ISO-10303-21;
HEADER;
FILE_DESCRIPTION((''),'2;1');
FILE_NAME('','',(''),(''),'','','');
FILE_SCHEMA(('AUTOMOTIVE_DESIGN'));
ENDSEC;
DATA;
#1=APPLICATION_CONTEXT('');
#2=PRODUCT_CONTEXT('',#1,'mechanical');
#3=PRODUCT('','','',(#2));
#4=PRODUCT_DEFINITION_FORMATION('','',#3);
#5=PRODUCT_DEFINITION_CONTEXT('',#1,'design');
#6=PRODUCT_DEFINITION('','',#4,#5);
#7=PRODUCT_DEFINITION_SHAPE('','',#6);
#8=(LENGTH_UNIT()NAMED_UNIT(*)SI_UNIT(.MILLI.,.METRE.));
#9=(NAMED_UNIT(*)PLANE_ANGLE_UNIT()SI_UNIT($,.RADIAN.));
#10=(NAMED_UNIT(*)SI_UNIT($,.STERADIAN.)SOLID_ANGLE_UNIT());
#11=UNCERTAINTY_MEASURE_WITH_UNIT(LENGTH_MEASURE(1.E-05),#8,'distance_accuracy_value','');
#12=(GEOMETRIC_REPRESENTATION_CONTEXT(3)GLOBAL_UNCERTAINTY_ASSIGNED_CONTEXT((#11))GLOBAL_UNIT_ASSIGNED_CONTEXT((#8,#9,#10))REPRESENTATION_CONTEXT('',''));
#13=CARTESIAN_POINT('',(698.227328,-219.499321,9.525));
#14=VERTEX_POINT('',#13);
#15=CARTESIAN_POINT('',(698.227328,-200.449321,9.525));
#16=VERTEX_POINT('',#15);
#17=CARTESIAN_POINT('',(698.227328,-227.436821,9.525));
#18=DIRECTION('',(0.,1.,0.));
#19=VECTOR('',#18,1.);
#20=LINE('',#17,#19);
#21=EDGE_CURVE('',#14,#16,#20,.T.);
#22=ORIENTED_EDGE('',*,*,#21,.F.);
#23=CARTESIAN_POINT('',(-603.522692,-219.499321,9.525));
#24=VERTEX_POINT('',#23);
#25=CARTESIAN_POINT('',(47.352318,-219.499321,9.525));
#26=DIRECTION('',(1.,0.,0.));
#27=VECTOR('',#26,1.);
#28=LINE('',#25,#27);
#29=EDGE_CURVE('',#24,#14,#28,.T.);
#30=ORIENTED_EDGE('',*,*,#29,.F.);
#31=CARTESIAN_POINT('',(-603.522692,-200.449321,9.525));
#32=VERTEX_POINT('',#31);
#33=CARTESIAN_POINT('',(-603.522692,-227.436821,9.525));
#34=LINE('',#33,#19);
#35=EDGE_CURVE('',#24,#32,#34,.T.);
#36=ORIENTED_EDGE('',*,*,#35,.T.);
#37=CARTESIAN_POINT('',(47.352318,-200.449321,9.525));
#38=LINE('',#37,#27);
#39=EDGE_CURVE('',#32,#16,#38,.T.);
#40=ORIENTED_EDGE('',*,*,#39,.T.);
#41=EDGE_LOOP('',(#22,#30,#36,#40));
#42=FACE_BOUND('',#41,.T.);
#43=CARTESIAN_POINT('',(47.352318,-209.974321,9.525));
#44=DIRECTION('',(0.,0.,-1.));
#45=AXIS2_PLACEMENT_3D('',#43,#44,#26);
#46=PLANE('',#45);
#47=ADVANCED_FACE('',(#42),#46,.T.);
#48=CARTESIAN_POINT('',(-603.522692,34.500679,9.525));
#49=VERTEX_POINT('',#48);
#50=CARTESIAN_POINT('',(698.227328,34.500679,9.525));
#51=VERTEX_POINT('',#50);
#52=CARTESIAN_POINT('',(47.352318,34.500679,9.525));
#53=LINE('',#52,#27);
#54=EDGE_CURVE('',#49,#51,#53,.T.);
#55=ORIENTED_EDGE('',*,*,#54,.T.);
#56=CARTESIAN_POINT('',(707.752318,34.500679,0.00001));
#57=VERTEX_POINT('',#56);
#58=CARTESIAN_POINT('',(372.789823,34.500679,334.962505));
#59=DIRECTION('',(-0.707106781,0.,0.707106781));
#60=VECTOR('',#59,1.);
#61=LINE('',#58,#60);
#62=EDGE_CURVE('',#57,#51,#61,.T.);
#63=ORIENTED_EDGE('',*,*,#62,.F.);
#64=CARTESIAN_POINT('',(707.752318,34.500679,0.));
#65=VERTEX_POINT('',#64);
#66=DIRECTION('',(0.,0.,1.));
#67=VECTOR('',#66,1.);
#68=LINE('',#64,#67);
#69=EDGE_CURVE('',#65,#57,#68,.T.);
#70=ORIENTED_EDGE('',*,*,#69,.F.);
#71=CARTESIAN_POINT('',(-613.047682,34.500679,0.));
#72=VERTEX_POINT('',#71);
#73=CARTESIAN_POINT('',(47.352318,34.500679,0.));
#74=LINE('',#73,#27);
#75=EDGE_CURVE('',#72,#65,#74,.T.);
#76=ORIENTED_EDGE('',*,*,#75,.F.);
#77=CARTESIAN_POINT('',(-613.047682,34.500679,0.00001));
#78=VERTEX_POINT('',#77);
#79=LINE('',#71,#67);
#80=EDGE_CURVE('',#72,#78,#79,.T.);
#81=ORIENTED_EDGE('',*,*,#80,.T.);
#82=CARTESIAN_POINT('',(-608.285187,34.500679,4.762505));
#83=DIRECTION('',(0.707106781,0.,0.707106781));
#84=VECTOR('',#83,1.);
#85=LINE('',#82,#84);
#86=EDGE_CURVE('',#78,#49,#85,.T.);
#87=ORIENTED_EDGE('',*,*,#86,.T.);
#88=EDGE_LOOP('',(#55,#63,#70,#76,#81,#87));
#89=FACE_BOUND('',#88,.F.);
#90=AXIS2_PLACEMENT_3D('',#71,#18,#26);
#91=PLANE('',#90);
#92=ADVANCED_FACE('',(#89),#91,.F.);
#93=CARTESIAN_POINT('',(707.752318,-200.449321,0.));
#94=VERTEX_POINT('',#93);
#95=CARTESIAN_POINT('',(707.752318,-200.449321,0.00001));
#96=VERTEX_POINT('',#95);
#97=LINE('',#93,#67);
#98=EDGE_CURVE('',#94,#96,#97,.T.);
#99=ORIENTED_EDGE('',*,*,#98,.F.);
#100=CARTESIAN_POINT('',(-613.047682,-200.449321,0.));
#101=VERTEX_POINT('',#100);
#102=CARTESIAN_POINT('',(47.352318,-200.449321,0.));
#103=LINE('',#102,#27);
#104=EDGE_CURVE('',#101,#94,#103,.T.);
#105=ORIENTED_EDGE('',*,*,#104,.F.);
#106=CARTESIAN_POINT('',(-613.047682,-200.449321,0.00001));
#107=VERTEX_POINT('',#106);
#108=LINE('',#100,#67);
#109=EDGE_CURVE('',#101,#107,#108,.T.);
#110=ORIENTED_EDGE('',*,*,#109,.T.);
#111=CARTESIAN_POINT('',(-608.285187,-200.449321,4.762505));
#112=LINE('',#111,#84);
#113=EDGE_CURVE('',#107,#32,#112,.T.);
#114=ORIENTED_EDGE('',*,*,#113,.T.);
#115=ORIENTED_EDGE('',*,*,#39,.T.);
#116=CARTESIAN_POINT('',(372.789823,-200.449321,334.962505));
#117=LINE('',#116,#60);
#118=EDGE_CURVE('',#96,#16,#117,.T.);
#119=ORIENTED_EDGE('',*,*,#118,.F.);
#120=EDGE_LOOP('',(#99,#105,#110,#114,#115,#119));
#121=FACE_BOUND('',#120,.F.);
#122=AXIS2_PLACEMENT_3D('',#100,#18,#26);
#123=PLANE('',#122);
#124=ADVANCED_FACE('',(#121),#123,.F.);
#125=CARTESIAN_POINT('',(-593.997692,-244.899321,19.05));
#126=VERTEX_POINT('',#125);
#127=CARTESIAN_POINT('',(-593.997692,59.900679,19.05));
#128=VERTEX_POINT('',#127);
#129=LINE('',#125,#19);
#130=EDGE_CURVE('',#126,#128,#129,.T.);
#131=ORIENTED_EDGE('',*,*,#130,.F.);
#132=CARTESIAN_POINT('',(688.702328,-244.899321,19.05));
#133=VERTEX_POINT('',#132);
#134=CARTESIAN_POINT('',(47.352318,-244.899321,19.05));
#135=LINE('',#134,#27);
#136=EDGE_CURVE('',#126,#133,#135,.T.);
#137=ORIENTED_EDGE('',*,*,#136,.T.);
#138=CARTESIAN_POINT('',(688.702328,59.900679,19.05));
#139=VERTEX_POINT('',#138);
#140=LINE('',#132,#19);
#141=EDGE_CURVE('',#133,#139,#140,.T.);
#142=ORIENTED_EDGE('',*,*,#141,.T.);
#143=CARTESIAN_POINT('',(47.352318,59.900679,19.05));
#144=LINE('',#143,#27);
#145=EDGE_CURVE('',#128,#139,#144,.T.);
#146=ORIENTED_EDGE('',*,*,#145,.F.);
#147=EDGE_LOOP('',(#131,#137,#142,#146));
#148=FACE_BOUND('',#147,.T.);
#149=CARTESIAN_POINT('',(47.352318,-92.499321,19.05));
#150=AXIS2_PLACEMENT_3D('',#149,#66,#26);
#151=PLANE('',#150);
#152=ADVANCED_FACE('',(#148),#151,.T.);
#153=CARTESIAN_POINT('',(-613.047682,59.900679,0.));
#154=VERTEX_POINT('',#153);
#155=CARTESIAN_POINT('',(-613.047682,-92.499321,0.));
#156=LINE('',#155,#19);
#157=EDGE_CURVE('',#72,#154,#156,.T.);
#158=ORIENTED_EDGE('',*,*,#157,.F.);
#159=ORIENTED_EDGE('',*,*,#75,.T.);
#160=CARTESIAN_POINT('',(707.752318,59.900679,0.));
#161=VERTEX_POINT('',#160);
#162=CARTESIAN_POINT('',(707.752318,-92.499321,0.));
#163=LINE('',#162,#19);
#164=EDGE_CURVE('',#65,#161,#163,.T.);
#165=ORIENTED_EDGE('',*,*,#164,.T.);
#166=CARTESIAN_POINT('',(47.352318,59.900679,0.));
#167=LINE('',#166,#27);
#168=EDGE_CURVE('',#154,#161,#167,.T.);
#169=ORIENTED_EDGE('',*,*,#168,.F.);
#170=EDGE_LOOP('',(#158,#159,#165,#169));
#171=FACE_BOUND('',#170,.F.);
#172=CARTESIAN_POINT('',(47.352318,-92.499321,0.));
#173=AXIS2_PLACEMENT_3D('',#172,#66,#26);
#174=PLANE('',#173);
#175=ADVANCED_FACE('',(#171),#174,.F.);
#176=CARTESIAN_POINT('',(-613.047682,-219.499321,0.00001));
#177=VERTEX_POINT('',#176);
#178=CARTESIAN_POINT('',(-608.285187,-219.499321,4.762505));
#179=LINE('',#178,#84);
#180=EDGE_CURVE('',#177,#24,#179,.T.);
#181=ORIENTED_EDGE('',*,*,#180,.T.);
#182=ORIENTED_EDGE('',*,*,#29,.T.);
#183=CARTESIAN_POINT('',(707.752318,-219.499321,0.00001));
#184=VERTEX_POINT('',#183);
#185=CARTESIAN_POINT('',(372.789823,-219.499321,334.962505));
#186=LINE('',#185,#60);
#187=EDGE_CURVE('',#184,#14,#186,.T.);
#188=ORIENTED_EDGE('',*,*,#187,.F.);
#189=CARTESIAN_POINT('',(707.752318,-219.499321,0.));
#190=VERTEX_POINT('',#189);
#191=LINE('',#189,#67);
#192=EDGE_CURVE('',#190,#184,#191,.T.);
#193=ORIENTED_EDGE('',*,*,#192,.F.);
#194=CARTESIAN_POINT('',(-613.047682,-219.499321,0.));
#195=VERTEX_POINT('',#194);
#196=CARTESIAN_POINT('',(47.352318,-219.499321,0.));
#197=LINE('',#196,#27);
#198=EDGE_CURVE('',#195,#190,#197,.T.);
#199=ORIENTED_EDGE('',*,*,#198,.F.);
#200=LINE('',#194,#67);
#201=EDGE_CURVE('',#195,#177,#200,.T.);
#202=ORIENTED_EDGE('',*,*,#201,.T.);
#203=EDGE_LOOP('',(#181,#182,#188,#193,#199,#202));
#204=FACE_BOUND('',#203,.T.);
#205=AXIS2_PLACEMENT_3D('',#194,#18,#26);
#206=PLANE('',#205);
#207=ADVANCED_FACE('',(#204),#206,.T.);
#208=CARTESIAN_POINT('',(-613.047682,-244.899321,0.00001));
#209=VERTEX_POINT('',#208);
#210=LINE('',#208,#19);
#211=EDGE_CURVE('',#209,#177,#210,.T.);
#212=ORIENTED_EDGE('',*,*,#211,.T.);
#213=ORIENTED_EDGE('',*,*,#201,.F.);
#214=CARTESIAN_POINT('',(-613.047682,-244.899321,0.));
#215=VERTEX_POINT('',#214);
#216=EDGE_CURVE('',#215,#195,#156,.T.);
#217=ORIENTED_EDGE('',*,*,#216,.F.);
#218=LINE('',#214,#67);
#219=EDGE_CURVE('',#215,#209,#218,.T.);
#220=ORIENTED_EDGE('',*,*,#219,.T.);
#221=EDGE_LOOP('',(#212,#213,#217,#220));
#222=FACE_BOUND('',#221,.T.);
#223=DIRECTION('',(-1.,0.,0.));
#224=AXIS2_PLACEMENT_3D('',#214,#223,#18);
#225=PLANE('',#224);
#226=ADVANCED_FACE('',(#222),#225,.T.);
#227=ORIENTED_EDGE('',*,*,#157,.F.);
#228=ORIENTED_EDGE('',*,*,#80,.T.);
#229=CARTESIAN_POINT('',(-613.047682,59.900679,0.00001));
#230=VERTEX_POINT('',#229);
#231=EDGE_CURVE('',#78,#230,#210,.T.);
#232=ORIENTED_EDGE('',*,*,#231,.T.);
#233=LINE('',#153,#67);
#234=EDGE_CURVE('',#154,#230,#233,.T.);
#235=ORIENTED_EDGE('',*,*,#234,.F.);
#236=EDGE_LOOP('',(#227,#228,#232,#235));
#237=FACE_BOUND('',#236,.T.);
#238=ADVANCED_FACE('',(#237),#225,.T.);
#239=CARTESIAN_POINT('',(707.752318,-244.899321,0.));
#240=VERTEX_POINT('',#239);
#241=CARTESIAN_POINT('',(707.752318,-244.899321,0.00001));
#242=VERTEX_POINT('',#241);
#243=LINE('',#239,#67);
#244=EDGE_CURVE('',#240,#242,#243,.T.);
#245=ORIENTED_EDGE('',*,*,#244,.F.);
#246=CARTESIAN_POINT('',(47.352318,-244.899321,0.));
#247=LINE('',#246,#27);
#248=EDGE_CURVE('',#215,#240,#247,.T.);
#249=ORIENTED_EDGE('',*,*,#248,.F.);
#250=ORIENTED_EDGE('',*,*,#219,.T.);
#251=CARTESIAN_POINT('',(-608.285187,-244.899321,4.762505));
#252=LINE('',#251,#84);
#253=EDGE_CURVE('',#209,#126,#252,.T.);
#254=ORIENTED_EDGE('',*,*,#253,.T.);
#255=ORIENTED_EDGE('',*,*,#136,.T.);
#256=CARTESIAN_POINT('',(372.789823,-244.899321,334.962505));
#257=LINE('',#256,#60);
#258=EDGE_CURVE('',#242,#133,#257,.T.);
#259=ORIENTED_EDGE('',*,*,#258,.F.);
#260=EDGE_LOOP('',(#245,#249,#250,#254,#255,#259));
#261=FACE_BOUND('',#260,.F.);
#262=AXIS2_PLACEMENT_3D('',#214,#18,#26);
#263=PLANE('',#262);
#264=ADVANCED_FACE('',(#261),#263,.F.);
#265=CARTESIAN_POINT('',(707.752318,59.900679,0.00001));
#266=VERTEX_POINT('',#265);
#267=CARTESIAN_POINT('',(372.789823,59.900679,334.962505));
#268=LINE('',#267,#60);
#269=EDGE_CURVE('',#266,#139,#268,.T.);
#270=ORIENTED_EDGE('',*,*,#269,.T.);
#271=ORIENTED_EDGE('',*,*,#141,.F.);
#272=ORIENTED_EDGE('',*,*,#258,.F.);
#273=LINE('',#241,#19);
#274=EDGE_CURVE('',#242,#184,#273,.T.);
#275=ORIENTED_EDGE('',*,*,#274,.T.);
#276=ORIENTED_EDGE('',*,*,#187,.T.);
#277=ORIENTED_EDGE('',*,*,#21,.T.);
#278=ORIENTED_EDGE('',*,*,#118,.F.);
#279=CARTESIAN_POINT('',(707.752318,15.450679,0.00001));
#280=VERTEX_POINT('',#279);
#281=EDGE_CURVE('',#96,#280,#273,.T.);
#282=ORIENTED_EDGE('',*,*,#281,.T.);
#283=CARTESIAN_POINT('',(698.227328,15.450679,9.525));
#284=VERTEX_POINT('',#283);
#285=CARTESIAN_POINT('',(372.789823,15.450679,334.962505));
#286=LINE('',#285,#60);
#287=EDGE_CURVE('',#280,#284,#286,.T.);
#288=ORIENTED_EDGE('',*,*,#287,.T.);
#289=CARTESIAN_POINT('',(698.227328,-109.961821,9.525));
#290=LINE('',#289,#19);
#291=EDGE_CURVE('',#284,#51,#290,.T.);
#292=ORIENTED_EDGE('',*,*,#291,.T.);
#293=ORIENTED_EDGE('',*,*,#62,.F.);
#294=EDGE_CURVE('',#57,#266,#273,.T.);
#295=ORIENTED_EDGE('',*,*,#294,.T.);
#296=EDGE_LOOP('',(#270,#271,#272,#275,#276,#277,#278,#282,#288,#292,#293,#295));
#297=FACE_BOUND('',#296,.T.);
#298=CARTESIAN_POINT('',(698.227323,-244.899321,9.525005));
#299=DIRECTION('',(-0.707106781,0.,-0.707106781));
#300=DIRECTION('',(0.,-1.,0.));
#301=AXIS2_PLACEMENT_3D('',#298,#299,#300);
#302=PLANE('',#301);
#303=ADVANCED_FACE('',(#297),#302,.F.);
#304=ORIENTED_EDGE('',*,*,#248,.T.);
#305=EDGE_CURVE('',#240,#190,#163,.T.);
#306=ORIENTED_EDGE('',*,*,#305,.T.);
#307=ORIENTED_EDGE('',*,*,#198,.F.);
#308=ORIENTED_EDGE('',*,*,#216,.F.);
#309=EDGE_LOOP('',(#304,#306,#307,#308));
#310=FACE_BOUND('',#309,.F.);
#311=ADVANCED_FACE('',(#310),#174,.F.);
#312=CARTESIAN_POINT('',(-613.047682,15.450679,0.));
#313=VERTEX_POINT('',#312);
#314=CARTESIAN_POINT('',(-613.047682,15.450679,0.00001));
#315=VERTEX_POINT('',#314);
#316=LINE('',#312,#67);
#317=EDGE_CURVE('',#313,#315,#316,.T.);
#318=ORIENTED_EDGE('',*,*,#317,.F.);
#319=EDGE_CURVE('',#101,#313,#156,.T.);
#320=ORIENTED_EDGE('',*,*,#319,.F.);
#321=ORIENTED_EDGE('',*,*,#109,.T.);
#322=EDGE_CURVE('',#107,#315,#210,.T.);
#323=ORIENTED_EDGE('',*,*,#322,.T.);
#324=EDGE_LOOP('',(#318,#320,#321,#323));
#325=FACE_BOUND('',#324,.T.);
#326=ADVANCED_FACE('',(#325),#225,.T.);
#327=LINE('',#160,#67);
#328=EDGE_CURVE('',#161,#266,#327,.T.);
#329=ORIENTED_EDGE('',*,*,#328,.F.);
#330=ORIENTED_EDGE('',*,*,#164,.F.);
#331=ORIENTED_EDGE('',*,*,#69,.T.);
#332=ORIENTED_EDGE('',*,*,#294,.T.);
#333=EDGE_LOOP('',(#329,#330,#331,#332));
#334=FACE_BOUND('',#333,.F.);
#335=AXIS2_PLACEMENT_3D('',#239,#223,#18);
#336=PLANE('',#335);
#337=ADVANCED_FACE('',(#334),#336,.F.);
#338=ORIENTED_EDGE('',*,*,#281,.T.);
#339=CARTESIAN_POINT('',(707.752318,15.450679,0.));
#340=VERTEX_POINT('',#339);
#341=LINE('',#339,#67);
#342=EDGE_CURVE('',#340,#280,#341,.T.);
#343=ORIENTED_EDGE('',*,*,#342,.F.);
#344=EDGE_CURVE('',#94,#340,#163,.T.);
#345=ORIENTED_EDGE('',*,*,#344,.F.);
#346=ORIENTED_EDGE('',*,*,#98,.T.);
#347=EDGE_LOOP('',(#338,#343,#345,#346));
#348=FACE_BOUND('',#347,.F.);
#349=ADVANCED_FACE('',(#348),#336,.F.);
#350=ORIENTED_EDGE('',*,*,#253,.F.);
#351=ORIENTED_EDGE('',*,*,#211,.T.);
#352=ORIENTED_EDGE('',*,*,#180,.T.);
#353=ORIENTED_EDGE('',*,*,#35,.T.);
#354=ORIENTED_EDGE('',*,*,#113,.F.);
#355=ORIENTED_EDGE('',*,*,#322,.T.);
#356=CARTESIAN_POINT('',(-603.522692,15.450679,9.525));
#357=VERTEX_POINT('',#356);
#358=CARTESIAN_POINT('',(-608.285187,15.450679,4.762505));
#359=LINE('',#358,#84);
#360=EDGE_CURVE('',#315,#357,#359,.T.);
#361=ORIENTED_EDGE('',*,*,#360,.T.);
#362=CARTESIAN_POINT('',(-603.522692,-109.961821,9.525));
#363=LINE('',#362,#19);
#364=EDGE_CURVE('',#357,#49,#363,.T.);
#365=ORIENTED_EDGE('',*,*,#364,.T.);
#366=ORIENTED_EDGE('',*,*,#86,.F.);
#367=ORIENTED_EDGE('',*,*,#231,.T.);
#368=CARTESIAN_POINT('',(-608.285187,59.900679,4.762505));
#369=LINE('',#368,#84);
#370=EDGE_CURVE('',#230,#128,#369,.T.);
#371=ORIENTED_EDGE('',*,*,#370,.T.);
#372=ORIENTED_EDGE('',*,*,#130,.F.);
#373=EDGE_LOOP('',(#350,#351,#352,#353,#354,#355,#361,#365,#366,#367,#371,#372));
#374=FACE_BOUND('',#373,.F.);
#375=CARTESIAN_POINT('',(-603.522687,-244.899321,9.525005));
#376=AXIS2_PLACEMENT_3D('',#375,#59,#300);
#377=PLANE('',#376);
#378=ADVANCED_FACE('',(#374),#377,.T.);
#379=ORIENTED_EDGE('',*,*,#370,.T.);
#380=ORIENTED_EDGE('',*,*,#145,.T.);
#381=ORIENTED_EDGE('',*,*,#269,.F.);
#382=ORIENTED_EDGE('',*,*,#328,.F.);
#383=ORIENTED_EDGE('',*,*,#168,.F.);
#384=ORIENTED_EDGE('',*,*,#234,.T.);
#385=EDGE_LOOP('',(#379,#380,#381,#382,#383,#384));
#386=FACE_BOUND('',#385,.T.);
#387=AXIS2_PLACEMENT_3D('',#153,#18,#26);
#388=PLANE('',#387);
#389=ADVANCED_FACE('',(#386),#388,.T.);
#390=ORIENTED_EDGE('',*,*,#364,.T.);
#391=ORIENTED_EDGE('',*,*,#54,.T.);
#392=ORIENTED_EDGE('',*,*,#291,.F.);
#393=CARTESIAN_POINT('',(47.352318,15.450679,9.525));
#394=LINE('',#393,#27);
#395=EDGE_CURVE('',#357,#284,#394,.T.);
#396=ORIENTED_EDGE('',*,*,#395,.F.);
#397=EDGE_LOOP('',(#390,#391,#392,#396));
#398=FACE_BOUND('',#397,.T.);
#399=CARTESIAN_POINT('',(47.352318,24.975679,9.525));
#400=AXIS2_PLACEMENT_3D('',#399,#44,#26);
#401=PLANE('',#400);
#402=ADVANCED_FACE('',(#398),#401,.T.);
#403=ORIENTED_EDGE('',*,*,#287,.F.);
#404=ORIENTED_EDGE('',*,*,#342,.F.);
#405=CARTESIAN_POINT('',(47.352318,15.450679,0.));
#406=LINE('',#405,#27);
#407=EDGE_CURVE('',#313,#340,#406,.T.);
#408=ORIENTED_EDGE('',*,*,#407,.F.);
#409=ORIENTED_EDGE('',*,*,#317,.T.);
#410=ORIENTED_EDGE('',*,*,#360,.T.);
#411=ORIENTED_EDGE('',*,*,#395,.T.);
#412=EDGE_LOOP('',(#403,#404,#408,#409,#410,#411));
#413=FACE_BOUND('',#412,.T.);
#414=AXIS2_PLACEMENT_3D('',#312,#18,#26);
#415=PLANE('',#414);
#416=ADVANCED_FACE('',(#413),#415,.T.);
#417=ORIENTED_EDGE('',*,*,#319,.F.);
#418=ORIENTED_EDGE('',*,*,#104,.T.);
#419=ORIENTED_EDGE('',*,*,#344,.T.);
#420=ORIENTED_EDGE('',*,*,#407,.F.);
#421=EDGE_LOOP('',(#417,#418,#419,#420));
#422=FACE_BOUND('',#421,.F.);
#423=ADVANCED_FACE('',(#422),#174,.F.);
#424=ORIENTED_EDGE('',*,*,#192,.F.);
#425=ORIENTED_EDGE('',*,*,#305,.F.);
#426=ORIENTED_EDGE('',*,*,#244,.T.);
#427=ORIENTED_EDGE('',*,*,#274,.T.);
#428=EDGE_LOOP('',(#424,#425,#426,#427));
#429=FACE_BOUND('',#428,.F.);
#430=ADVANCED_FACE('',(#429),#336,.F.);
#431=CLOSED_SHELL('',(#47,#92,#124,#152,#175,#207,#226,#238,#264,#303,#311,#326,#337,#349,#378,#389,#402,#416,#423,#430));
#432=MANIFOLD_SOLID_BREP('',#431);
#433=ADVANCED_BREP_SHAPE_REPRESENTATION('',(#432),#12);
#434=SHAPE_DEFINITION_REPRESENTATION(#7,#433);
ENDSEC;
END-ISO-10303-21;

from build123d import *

# Parameters (mm, degrees)
F0_W     = 1320.8
F0_H     = 304.8
F1_DEPTH = 19.05
F2_SIZE  = 19.04999
F3_W     = 1320.8
F3_H     = 19.05
F4_DEPTH = 9.525


# Not quite as in the source:
# - a fillet or chamfer is up to 0.001 mm smaller than in the source, because OpenCascade refuses the exact size


with BuildPart() as f1:
    # F0 (on Top) → F1 (new body)
    with BuildSketch(Plane.XY):
        with Locations((47.3523183346, -92.4993205261)):
            Rectangle(F0_W, F0_H)
    extrude(amount=F1_DEPTH)

    # F2 (size 19.05 in the source; OpenCascade refuses exactly that, so slightly less here)
    f2_edges = [f1.edges().sort_by_distance(p)[0] for p in [
        (707.752318, -92.499321, 19.05),
        (-613.047682, -92.499321, 19.05),
    ]]
    chamfer(f2_edges, length=F2_SIZE)

    # F3 (on face) → F4 (cut)
    with BuildSketch(Plane(origin=(0, 0, 0), x_dir=(1, 0, 0), z_dir=(0, 0, -1))):
        with Locations((47.3523183346, 209.9743205261)):
            Rectangle(F3_W, F3_H)
        with Locations((47.3523183346, -24.9756794739)):
            Rectangle(F3_W, F3_H)
    extrude(amount=-F4_DEPTH, mode=Mode.SUBTRACT)


solid = f1.part
